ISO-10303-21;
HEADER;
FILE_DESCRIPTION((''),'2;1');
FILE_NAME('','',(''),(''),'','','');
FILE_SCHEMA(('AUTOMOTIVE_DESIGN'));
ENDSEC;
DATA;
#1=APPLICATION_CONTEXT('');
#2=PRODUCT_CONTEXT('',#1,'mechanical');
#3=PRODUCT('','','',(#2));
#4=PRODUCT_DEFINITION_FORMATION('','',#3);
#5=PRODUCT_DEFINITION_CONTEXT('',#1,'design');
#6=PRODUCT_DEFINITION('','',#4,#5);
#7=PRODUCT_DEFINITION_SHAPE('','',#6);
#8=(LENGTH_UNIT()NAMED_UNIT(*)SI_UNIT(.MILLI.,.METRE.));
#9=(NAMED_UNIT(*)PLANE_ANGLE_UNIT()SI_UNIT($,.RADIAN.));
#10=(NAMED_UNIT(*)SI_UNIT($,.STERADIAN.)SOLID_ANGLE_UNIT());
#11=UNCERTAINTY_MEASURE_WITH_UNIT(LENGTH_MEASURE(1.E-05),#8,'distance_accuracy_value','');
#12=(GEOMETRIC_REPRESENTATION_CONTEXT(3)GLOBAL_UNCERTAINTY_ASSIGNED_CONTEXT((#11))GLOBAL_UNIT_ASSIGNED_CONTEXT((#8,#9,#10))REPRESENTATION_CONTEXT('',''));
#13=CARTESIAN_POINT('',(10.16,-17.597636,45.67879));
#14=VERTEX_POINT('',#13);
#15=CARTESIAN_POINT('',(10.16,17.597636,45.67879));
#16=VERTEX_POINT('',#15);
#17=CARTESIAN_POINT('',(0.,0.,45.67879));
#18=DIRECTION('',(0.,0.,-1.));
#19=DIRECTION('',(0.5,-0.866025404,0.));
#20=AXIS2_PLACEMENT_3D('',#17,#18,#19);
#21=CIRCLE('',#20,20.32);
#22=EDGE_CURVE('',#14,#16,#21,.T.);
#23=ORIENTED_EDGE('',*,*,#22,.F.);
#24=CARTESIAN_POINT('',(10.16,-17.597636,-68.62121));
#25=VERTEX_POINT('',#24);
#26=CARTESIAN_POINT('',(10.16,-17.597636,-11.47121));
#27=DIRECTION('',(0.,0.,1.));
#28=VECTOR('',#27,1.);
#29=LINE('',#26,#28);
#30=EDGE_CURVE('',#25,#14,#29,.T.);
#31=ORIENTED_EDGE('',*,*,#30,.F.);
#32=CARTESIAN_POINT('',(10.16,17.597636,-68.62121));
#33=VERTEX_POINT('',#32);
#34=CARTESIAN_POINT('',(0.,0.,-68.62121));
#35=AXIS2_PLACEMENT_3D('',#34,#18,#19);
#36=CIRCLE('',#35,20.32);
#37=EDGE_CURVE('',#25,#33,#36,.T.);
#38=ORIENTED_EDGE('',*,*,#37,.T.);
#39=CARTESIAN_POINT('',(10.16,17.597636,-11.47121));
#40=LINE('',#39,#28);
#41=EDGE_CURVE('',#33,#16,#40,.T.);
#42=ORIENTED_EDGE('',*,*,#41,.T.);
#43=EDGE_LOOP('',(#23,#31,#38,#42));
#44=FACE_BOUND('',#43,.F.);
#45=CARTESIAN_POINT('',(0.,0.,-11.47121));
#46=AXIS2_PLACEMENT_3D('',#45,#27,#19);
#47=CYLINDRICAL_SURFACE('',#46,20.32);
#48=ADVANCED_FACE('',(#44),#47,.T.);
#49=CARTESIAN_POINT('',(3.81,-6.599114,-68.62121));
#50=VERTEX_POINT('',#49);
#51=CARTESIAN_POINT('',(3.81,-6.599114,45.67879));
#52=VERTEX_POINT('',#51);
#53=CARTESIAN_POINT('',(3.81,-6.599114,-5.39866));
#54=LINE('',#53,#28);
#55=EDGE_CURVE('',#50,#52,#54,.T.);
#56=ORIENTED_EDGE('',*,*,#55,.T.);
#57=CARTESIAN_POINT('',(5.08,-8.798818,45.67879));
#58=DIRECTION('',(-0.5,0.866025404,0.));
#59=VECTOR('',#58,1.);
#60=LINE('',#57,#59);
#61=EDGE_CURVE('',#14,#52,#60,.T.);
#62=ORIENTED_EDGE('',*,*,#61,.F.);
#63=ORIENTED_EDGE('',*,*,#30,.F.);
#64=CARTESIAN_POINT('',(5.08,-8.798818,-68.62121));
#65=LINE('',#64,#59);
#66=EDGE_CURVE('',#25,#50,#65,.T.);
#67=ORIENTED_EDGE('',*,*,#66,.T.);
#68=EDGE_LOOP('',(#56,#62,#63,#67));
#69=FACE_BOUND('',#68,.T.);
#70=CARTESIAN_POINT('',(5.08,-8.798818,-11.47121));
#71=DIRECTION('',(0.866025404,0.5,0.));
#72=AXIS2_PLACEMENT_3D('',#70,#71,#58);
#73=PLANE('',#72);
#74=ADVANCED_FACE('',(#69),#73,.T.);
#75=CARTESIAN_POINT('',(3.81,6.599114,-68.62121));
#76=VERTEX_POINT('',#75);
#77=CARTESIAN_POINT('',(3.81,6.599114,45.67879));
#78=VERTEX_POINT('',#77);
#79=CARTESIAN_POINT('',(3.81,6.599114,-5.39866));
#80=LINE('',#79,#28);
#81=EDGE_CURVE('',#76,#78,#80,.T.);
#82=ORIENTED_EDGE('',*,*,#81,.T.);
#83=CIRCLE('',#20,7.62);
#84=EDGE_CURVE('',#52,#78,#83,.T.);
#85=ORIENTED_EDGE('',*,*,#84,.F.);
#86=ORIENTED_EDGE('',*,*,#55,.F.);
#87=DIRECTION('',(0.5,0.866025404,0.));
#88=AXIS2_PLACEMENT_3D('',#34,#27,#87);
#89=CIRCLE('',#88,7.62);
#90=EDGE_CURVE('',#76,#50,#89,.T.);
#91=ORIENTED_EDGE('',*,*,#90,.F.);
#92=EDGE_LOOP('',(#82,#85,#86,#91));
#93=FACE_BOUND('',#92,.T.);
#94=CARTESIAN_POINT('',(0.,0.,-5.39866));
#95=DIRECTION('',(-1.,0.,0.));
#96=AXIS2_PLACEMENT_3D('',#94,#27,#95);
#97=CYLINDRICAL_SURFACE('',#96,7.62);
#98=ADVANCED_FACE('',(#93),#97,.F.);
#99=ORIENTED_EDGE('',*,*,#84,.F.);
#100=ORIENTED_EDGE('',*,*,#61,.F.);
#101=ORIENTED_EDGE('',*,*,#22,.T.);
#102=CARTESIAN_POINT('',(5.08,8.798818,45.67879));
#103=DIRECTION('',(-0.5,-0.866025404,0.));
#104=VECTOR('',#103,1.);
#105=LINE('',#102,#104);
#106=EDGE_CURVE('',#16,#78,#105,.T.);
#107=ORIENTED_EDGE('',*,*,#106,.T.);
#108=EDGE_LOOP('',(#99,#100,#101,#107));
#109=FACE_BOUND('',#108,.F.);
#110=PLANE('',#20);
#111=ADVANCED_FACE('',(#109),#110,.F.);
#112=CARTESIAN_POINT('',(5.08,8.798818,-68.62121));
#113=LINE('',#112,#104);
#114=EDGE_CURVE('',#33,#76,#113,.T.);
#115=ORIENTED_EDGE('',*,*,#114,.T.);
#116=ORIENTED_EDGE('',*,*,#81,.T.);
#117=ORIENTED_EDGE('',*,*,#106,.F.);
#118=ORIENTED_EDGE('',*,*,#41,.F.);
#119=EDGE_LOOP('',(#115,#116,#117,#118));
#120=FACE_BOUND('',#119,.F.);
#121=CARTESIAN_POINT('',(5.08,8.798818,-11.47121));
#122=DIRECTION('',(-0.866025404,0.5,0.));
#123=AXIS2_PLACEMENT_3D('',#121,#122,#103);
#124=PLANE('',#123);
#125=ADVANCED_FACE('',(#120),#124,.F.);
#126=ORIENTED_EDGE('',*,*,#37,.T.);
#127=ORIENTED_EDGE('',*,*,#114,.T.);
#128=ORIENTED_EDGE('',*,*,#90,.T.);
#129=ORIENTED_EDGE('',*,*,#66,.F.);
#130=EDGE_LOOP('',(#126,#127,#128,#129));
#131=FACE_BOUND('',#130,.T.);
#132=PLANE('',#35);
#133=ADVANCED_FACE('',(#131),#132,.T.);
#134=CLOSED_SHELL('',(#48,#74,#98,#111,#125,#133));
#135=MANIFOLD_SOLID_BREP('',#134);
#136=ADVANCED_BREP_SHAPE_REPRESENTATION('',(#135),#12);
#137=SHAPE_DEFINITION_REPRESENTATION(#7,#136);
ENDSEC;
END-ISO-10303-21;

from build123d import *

# Parameters (mm, degrees)
F0_W          = 20.32
F0_H          = 114.3
F1_ANGLE_BACK = 120
F1_ANGLE      = 240
F2_W          = 7.62
F2_H          = 127


with BuildPart() as f1:
    # F0 (on Front) → F1 (revolve)
    with BuildSketch(Plane.XZ, mode=Mode.PRIVATE) as f1_sk:
        with Locations((-10.16, -11.4712095437)):
            Rectangle(F0_W, F0_H)
    revolve(f1_sk.sketch.rotate(Axis((0, 0, -11.4712095437), (0, 0, -1)), -F1_ANGLE_BACK), axis=Axis((0, 0, -11.4712095437), (0, 0, -1)), revolution_arc=F1_ANGLE)

    # F2 (on Front) → F3 (revolve, cut)
    with BuildSketch(Plane.XZ):
        with Locations((-3.81, -5.3986597389)):
            Rectangle(F2_W, F2_H)
    revolve(axis=Axis((0, 0, -5.3986597389), (0, 0, -1)), mode=Mode.SUBTRACT)


solid = f1.part
